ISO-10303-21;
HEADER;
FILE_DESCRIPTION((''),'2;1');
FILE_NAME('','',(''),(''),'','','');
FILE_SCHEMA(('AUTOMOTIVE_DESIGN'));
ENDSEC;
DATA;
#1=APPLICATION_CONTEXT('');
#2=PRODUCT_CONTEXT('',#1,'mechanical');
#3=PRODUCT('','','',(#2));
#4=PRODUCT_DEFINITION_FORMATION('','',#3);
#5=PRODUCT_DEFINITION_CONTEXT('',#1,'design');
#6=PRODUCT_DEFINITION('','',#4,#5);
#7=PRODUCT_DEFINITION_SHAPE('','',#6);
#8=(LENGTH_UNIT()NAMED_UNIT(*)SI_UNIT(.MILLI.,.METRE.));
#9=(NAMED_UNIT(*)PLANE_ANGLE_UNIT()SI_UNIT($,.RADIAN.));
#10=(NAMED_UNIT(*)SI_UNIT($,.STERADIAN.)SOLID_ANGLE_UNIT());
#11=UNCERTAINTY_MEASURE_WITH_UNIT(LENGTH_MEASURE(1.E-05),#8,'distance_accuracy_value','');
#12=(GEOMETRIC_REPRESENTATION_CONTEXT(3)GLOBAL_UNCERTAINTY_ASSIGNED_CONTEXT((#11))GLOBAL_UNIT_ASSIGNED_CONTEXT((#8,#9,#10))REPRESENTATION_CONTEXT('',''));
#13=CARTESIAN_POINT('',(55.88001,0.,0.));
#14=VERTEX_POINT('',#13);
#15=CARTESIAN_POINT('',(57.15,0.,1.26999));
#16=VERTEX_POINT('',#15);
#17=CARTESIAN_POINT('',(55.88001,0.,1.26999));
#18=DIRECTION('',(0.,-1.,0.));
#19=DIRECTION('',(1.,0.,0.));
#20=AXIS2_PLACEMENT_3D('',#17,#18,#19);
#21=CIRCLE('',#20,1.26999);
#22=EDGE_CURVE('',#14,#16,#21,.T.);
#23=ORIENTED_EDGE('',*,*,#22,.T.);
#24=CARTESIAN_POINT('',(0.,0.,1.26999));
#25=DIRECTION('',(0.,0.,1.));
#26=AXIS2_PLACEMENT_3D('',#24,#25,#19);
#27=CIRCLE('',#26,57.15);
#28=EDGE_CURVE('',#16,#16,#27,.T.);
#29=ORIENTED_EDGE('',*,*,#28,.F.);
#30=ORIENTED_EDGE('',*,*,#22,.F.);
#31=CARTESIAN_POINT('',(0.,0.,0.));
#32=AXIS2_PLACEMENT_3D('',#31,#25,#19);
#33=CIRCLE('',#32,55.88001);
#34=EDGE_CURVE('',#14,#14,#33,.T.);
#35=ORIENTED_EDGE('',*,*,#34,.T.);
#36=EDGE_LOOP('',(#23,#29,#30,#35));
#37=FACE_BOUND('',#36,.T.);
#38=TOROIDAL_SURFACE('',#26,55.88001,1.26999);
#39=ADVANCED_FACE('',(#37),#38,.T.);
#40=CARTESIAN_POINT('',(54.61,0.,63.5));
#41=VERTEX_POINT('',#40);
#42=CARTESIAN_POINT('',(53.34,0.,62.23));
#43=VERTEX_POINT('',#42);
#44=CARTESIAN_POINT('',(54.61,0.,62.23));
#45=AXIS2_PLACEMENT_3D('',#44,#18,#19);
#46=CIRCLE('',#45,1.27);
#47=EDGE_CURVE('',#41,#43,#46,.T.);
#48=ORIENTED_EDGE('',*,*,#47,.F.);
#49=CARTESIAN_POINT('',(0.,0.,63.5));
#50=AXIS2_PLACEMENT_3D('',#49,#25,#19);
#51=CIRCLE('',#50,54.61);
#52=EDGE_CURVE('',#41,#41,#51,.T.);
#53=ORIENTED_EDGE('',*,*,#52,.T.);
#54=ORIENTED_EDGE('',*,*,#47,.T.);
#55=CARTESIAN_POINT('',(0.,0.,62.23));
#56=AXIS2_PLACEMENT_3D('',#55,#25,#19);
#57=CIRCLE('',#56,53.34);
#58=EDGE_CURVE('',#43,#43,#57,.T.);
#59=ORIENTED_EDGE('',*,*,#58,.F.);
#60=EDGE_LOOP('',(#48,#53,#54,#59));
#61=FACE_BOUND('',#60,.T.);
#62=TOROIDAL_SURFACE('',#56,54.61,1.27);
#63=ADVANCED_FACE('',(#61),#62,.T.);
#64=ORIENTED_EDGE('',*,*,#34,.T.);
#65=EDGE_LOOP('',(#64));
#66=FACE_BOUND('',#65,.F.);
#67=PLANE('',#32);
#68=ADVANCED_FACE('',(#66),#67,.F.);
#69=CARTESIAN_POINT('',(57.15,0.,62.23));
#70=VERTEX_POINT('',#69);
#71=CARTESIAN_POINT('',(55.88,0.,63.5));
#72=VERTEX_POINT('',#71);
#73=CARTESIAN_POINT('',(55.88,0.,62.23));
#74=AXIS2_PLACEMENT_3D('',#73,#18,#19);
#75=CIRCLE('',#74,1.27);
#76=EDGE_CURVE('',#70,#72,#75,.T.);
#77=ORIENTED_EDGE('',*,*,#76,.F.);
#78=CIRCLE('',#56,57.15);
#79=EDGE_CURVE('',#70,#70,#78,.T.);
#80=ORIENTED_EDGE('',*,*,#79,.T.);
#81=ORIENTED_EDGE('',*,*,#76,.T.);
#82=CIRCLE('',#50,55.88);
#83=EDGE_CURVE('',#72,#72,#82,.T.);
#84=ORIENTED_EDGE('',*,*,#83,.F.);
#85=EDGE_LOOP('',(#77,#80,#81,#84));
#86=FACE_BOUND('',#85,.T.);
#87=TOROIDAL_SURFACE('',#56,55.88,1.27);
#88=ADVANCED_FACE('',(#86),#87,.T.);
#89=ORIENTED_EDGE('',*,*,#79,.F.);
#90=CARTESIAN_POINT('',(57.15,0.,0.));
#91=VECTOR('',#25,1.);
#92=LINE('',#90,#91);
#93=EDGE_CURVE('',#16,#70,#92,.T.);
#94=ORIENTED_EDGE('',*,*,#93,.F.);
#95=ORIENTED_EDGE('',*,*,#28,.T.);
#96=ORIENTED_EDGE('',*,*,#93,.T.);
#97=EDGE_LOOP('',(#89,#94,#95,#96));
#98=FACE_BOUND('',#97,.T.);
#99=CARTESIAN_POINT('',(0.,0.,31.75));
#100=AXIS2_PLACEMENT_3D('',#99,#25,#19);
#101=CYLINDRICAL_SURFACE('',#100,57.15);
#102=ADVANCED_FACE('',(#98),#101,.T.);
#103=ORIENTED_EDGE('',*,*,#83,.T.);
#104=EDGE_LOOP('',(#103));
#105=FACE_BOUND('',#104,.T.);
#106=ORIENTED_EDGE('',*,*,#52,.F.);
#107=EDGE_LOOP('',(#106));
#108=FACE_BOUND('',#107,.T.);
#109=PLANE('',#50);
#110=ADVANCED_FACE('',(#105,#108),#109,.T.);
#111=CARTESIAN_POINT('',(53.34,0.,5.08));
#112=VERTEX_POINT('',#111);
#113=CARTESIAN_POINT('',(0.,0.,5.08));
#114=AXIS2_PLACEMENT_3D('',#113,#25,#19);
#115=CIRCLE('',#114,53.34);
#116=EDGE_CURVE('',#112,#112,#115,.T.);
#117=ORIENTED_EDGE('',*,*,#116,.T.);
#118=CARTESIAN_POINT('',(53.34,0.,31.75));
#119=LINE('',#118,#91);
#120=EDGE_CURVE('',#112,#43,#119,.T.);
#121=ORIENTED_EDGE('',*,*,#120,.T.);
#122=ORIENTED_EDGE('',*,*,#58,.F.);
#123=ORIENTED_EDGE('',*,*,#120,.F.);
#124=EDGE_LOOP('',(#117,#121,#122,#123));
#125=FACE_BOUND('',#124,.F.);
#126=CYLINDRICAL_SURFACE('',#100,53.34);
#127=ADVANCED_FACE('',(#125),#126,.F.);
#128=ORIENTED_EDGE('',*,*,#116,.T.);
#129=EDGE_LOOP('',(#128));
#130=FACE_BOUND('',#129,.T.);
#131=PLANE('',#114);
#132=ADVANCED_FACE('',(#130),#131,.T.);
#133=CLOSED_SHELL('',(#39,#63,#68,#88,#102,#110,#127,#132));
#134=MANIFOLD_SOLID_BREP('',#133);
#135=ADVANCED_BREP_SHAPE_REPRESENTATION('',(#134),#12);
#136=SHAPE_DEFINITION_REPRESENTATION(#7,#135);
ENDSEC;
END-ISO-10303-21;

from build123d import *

# Parameters (mm, degrees)
F0_R     = 57.15
F1_DEPTH = 5.08
F2_R     = 1.27
F5_E1_W  = 63.5
F5_E1_H  = 3.81
F7_R     = 1.26999
F8_R     = 1.27


# Not quite as in the source:
# - a fillet or chamfer is up to 0.001 mm smaller than in the source, because OpenCascade refuses the exact size


with BuildPart() as f1:
    # F0 (on Top) → F1 (new body)
    with BuildSketch(Plane.XY):
        Circle(F0_R)
    extrude(amount=F1_DEPTH)

    # F2
    f2_edges = [f1.edges().sort_by_distance(p)[0] for p in [
        (-57.15, 0, 0),
    ]]
    fillet(f2_edges, radius=F2_R)

    # F5_E1 (on explicit) → F6 (revolve)
    with BuildSketch(Plane(origin=(57.15, 0, 0), x_dir=(0, 0, 1), z_dir=(0, -1, 0))):
        with Locations((31.75, 1.905)):
            Rectangle(F5_E1_W, F5_E1_H)
    revolve(axis=Axis((0, 0, 5.08), (0, 0, 1)))

    # F7 (radius 1.27 in the source; OpenCascade refuses exactly that, so slightly less here)
    f7_edges = [f1.edges().sort_by_distance(p)[0] for p in [
        (-57.15, 0, 0),
    ]]
    fillet(f7_edges, radius=F7_R)

    # F8
    f8_edges = [f1.edges().sort_by_distance(p)[0] for p in [
        (-57.15, 0, 63.5),
        (-53.34, 0, 63.5),
    ]]
    fillet(f8_edges, radius=F8_R)


solid = f1.part
